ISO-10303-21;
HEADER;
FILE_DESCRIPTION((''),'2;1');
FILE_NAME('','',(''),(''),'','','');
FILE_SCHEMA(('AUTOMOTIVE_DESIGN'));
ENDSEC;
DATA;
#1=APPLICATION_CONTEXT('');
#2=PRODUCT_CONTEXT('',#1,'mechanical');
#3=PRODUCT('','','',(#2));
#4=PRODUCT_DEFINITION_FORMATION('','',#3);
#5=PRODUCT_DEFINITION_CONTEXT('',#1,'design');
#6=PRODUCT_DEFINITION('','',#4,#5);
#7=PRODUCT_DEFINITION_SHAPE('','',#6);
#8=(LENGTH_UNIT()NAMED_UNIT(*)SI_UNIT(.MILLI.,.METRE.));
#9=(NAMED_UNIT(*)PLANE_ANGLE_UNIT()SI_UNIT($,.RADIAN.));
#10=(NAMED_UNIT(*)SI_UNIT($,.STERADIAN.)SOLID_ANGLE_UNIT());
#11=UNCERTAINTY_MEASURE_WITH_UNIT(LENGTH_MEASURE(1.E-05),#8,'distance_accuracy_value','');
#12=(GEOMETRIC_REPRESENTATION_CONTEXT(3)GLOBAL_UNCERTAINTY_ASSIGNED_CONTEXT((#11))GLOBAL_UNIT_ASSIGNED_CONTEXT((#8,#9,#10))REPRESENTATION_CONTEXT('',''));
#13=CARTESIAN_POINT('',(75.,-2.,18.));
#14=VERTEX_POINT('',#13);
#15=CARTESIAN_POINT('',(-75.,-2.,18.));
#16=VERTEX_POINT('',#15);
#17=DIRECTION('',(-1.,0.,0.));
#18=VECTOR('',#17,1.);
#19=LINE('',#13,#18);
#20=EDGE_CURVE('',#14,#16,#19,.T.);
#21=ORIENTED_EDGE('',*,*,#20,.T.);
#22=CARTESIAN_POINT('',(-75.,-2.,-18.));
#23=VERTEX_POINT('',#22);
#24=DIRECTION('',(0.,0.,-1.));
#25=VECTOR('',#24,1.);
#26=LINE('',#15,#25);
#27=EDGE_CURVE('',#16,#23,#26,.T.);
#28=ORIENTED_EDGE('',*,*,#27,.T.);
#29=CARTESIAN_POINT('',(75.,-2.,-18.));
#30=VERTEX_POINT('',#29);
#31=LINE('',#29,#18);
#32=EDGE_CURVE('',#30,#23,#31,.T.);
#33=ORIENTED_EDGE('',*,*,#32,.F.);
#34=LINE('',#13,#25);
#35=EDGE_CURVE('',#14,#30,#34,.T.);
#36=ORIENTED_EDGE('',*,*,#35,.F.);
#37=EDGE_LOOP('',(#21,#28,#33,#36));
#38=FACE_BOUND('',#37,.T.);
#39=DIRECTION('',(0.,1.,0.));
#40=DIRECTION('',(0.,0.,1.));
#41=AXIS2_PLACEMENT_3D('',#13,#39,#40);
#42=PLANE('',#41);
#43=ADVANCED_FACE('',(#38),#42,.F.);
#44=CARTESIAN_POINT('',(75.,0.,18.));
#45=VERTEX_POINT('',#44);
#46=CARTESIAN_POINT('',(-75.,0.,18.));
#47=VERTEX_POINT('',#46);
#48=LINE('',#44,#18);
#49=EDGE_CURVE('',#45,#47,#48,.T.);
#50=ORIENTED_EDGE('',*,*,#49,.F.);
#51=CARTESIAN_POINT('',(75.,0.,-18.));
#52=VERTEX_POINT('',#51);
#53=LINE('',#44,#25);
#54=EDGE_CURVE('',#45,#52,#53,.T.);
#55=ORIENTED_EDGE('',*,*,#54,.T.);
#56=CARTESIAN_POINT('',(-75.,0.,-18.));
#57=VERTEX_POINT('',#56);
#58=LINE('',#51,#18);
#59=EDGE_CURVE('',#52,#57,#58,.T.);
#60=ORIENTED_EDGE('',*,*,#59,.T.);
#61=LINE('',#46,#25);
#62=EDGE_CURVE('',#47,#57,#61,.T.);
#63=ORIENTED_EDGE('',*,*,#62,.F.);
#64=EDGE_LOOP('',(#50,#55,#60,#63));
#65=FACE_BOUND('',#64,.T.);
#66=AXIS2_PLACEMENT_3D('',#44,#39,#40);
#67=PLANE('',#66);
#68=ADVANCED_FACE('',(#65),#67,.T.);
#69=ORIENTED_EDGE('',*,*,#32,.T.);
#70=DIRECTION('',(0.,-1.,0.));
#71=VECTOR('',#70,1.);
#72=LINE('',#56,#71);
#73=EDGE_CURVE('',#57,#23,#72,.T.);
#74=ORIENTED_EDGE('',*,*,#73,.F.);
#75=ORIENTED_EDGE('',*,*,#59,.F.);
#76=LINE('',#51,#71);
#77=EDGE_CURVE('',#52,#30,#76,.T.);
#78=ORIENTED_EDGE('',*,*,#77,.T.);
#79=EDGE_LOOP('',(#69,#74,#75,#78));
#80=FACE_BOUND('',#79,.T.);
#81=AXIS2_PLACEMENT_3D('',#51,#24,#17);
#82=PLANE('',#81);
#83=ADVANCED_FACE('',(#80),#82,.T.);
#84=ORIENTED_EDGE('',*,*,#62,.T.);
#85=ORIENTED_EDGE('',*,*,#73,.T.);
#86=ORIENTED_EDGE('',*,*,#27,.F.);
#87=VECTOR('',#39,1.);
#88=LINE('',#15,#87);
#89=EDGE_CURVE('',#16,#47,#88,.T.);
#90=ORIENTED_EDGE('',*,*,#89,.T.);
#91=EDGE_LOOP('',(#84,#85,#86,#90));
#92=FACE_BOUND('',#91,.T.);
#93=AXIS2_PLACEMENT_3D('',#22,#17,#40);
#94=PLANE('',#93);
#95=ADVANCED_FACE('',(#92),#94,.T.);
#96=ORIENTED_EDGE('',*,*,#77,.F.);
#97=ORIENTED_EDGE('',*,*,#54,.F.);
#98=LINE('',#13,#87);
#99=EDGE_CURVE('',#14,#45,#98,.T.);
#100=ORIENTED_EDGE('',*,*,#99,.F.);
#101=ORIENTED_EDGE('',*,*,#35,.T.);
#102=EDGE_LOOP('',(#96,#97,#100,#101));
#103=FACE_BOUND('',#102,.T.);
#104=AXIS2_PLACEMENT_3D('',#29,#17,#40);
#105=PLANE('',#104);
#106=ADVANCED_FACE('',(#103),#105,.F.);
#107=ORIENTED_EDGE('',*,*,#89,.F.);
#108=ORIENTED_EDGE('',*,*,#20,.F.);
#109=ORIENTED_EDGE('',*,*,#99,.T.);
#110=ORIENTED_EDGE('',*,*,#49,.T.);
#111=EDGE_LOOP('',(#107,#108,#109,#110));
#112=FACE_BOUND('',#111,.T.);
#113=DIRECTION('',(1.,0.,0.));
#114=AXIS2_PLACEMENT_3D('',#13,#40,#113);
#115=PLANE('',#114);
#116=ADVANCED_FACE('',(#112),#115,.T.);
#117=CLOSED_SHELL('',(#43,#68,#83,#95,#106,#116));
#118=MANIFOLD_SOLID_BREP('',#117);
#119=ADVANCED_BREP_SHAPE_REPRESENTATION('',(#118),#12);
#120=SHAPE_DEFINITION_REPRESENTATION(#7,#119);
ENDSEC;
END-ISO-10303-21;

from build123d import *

# Parameters (mm, degrees)
ESBO_O1_W          = 36
ESBO_O1_H          = 2
FLANGE_BASE2_DEPTH = 75


# Sheet-metal steps are written as plain solids
with BuildPart() as part:
    # Esboço1 → Flange-base2 (new, symmetric)
    with BuildSketch(Plane(origin=(0, 0, 0), x_dir=(0, 0, -1), z_dir=(1, 0, 0))):
        with Locations((0, -1)):
            Rectangle(ESBO_O1_W, ESBO_O1_H)
    extrude(amount=FLANGE_BASE2_DEPTH, both=True)


solid = part.part
